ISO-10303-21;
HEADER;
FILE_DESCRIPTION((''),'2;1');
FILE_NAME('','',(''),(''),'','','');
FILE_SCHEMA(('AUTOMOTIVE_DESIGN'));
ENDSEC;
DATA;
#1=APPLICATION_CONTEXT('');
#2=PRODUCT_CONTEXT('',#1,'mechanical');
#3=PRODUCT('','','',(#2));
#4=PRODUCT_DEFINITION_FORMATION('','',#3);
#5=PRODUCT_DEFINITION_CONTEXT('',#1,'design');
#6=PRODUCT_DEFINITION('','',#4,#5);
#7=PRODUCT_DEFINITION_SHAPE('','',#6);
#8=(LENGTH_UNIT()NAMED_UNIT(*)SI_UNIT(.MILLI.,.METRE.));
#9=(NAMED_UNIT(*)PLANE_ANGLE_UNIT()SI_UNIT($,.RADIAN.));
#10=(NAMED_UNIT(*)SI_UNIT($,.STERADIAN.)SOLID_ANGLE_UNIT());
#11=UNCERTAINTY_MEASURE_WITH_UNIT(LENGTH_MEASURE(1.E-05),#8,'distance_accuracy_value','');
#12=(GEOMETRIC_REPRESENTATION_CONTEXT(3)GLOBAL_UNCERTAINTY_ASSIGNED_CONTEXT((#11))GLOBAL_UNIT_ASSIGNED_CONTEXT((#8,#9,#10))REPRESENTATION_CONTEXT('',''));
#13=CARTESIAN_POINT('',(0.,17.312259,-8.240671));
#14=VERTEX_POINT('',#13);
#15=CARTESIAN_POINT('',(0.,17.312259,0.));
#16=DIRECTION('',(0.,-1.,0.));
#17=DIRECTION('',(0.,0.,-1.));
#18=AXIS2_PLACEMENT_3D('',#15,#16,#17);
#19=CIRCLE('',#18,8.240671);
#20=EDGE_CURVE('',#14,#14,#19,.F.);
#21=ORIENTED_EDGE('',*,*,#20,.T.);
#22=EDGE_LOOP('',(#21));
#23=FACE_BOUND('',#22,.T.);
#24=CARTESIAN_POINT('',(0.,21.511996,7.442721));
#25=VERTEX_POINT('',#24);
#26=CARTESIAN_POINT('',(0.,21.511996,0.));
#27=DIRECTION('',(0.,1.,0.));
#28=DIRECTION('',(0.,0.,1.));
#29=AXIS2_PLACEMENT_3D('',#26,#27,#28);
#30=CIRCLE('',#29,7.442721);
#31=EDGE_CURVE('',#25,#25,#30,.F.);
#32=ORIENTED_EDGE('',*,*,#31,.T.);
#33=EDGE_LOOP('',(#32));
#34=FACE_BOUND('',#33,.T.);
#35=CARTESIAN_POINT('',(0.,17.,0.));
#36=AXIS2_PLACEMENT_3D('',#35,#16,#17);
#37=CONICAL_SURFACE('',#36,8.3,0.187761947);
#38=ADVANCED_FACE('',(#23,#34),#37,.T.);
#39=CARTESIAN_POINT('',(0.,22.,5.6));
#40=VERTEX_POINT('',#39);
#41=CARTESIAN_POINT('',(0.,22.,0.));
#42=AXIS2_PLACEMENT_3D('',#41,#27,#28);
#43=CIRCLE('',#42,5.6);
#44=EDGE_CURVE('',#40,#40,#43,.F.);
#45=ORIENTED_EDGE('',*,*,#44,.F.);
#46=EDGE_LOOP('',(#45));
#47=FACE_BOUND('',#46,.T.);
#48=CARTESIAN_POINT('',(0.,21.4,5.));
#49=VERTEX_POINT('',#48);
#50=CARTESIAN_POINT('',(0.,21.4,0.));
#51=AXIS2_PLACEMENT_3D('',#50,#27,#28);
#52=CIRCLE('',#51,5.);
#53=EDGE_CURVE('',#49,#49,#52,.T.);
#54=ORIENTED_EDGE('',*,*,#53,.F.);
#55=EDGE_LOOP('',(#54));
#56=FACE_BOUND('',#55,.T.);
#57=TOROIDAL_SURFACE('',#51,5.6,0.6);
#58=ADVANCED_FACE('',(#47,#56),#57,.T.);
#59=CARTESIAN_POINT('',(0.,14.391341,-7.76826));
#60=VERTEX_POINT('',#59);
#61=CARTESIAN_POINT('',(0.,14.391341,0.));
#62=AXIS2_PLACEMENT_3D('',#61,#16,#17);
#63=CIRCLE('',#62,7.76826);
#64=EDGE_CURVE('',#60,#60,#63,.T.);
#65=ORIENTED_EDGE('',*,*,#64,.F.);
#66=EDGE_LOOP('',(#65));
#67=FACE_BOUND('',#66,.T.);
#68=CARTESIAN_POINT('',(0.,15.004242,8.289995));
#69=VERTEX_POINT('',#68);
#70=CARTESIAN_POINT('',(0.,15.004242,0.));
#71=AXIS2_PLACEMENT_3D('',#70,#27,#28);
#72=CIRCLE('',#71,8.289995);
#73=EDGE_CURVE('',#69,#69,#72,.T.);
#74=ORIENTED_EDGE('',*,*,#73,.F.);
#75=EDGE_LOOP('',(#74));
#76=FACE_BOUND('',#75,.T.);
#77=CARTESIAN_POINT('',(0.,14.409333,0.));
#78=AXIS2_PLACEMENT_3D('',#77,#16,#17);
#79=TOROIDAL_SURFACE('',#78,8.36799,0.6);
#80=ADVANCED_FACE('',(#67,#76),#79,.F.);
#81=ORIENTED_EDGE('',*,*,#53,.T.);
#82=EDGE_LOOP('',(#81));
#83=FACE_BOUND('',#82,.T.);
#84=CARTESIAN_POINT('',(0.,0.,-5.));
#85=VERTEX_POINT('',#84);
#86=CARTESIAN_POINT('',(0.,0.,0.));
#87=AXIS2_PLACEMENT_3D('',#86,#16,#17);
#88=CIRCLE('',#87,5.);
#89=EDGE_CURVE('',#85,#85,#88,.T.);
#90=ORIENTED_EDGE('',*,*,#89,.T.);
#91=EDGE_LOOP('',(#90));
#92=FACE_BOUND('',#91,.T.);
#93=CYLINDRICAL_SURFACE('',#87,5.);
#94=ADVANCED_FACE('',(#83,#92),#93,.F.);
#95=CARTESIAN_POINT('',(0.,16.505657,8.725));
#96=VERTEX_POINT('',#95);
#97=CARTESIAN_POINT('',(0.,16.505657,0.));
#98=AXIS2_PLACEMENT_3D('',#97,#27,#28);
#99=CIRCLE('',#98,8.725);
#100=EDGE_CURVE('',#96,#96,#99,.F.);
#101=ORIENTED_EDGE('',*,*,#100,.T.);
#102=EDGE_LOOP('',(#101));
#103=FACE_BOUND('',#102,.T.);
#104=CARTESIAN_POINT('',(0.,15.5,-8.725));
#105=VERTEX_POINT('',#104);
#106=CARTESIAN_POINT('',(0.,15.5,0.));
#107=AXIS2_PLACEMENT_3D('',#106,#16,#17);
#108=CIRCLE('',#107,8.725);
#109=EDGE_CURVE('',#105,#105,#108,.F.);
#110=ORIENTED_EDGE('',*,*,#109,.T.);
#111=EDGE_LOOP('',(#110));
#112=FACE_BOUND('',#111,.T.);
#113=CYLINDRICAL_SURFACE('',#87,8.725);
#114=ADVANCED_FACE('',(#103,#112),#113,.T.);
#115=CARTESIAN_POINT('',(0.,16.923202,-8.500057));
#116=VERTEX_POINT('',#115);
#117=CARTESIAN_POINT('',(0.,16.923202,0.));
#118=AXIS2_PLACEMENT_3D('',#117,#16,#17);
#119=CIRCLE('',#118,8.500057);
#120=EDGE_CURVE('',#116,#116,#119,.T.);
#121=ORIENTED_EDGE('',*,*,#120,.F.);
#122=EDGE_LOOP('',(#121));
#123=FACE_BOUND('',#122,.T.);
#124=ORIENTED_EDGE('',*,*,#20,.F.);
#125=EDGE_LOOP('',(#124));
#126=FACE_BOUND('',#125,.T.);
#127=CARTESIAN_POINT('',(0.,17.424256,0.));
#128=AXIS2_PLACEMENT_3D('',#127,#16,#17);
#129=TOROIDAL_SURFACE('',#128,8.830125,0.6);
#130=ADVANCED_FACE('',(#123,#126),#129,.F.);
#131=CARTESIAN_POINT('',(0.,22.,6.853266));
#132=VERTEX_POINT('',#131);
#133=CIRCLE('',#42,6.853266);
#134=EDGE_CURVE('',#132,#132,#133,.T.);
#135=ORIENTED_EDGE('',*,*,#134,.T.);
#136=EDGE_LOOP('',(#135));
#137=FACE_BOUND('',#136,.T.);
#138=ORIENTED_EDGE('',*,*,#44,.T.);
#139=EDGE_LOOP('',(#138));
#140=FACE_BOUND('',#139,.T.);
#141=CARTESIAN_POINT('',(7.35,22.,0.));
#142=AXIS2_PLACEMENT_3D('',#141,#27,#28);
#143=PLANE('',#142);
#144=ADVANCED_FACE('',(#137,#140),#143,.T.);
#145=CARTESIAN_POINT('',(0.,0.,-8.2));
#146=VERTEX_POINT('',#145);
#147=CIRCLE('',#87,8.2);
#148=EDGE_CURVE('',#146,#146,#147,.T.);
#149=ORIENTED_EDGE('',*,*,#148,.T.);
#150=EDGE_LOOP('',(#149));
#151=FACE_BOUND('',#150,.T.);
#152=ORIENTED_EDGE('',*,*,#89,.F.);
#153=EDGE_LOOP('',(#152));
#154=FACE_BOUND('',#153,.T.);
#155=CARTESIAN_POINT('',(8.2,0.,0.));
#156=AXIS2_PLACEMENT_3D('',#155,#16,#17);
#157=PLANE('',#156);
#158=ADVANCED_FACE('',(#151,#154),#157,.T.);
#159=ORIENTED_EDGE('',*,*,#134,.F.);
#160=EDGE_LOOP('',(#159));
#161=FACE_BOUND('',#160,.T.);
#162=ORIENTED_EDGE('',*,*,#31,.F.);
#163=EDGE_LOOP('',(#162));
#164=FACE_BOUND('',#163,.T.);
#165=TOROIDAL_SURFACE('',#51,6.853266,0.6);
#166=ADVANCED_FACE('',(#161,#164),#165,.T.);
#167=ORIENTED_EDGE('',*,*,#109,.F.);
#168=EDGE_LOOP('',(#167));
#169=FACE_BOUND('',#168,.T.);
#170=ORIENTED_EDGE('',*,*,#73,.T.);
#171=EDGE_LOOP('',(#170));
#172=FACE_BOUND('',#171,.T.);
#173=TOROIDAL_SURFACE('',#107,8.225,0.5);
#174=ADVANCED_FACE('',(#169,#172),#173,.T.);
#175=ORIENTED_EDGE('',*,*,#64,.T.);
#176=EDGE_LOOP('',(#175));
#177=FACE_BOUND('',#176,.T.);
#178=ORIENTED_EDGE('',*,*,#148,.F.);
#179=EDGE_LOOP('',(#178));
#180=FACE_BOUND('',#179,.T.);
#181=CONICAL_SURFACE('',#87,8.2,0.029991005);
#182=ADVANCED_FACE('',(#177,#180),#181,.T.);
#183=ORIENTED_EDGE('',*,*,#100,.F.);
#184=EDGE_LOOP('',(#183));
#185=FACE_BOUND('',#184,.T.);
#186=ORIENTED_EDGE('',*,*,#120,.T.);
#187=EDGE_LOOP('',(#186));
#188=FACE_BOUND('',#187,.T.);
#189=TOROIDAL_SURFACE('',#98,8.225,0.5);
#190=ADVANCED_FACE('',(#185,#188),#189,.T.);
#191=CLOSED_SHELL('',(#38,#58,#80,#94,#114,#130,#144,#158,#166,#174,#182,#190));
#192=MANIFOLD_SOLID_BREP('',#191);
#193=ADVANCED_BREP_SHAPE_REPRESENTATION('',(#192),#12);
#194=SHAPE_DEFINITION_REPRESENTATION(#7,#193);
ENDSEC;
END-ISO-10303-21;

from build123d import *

# Parameters (mm, degrees)
FILLET1_R = 0.5
FILLET2_R = 0.6


with BuildPart() as part:
    # Sketch1 → Revolve1 (revolve)
    with BuildSketch(Plane.XY, mode=Mode.PRIVATE) as revolve1_sk:
        Polygon((5, 22), (5, 0), (8.2, 0), (7.75, 15), (8.725, 15), (8.725, 17), (8.3, 17), (7.35, 22), align=None)
    revolve(revolve1_sk.sketch.rotate(Axis((0, 0, 0), (0, 1, 0)), 90), axis=Axis((0, 0, 0), (0, 1, 0)))

    # Fillet1
    # the kernel refuses this fillet: 0.5 mm, written as the material it takes off along each edge
    with BuildSketch(Plane(origin=(0, 17, 0), x_dir=(0, 0, -1), z_dir=(1, 0, 0))) as fillet1_piece_1:
        with BuildLine():
            CenterArc((8.225, -0.494342998), FILLET1_R, 0, 81.373073441)
            Line((8.3, 0), (8.3015, 0.00988686))
            ThreePointArc((8.3015, 0.00988686), (8.5125, 0.01), (8.725, 0.01))
            Line((8.725, 0.01), (8.735, 0))
            Line((8.735, 0), (8.735, -0.494342998))
            Line((8.735, -0.494342998), (8.725, -0.494342998))
        make_face()
    revolve(axis=Axis((0, 17, 0), (0, 1, 0)), mode=Mode.SUBTRACT)
    with BuildSketch(Plane(origin=(0, 15, 0), x_dir=(0, 0, -1), z_dir=(1, 0, 0))) as fillet1_piece_2:
        with BuildLine():
            CenterArc((8.725 - FILLET1_R, FILLET1_R), FILLET1_R, 270, 90)
            Line((8.725, FILLET1_R), (8.725 + FILLET1_R * 0.02, FILLET1_R))
            Line((8.725 + FILLET1_R * 0.02, FILLET1_R), (8.725 + FILLET1_R * 0.02, -FILLET1_R * 0.02))
            Line((8.725 + FILLET1_R * 0.02, -FILLET1_R * 0.02), (8.725 - FILLET1_R, -FILLET1_R * 0.02))
            Line((8.725 - FILLET1_R, -FILLET1_R * 0.02), (8.725 - FILLET1_R, 0))
        make_face()
    revolve(axis=Axis((0, 15, 0), (0, 1, 0)), mode=Mode.SUBTRACT)

    # Fillet2
    fillet2_edges = [part.edges().sort_by_distance(p)[0] for p in [
        (0, 15, 7.75),
        (0, 17, 8.3),
        (0, 22, 5),
        (0, 22, 7.35),
    ]]
    fillet(fillet2_edges, radius=FILLET2_R)


solid = part.part
